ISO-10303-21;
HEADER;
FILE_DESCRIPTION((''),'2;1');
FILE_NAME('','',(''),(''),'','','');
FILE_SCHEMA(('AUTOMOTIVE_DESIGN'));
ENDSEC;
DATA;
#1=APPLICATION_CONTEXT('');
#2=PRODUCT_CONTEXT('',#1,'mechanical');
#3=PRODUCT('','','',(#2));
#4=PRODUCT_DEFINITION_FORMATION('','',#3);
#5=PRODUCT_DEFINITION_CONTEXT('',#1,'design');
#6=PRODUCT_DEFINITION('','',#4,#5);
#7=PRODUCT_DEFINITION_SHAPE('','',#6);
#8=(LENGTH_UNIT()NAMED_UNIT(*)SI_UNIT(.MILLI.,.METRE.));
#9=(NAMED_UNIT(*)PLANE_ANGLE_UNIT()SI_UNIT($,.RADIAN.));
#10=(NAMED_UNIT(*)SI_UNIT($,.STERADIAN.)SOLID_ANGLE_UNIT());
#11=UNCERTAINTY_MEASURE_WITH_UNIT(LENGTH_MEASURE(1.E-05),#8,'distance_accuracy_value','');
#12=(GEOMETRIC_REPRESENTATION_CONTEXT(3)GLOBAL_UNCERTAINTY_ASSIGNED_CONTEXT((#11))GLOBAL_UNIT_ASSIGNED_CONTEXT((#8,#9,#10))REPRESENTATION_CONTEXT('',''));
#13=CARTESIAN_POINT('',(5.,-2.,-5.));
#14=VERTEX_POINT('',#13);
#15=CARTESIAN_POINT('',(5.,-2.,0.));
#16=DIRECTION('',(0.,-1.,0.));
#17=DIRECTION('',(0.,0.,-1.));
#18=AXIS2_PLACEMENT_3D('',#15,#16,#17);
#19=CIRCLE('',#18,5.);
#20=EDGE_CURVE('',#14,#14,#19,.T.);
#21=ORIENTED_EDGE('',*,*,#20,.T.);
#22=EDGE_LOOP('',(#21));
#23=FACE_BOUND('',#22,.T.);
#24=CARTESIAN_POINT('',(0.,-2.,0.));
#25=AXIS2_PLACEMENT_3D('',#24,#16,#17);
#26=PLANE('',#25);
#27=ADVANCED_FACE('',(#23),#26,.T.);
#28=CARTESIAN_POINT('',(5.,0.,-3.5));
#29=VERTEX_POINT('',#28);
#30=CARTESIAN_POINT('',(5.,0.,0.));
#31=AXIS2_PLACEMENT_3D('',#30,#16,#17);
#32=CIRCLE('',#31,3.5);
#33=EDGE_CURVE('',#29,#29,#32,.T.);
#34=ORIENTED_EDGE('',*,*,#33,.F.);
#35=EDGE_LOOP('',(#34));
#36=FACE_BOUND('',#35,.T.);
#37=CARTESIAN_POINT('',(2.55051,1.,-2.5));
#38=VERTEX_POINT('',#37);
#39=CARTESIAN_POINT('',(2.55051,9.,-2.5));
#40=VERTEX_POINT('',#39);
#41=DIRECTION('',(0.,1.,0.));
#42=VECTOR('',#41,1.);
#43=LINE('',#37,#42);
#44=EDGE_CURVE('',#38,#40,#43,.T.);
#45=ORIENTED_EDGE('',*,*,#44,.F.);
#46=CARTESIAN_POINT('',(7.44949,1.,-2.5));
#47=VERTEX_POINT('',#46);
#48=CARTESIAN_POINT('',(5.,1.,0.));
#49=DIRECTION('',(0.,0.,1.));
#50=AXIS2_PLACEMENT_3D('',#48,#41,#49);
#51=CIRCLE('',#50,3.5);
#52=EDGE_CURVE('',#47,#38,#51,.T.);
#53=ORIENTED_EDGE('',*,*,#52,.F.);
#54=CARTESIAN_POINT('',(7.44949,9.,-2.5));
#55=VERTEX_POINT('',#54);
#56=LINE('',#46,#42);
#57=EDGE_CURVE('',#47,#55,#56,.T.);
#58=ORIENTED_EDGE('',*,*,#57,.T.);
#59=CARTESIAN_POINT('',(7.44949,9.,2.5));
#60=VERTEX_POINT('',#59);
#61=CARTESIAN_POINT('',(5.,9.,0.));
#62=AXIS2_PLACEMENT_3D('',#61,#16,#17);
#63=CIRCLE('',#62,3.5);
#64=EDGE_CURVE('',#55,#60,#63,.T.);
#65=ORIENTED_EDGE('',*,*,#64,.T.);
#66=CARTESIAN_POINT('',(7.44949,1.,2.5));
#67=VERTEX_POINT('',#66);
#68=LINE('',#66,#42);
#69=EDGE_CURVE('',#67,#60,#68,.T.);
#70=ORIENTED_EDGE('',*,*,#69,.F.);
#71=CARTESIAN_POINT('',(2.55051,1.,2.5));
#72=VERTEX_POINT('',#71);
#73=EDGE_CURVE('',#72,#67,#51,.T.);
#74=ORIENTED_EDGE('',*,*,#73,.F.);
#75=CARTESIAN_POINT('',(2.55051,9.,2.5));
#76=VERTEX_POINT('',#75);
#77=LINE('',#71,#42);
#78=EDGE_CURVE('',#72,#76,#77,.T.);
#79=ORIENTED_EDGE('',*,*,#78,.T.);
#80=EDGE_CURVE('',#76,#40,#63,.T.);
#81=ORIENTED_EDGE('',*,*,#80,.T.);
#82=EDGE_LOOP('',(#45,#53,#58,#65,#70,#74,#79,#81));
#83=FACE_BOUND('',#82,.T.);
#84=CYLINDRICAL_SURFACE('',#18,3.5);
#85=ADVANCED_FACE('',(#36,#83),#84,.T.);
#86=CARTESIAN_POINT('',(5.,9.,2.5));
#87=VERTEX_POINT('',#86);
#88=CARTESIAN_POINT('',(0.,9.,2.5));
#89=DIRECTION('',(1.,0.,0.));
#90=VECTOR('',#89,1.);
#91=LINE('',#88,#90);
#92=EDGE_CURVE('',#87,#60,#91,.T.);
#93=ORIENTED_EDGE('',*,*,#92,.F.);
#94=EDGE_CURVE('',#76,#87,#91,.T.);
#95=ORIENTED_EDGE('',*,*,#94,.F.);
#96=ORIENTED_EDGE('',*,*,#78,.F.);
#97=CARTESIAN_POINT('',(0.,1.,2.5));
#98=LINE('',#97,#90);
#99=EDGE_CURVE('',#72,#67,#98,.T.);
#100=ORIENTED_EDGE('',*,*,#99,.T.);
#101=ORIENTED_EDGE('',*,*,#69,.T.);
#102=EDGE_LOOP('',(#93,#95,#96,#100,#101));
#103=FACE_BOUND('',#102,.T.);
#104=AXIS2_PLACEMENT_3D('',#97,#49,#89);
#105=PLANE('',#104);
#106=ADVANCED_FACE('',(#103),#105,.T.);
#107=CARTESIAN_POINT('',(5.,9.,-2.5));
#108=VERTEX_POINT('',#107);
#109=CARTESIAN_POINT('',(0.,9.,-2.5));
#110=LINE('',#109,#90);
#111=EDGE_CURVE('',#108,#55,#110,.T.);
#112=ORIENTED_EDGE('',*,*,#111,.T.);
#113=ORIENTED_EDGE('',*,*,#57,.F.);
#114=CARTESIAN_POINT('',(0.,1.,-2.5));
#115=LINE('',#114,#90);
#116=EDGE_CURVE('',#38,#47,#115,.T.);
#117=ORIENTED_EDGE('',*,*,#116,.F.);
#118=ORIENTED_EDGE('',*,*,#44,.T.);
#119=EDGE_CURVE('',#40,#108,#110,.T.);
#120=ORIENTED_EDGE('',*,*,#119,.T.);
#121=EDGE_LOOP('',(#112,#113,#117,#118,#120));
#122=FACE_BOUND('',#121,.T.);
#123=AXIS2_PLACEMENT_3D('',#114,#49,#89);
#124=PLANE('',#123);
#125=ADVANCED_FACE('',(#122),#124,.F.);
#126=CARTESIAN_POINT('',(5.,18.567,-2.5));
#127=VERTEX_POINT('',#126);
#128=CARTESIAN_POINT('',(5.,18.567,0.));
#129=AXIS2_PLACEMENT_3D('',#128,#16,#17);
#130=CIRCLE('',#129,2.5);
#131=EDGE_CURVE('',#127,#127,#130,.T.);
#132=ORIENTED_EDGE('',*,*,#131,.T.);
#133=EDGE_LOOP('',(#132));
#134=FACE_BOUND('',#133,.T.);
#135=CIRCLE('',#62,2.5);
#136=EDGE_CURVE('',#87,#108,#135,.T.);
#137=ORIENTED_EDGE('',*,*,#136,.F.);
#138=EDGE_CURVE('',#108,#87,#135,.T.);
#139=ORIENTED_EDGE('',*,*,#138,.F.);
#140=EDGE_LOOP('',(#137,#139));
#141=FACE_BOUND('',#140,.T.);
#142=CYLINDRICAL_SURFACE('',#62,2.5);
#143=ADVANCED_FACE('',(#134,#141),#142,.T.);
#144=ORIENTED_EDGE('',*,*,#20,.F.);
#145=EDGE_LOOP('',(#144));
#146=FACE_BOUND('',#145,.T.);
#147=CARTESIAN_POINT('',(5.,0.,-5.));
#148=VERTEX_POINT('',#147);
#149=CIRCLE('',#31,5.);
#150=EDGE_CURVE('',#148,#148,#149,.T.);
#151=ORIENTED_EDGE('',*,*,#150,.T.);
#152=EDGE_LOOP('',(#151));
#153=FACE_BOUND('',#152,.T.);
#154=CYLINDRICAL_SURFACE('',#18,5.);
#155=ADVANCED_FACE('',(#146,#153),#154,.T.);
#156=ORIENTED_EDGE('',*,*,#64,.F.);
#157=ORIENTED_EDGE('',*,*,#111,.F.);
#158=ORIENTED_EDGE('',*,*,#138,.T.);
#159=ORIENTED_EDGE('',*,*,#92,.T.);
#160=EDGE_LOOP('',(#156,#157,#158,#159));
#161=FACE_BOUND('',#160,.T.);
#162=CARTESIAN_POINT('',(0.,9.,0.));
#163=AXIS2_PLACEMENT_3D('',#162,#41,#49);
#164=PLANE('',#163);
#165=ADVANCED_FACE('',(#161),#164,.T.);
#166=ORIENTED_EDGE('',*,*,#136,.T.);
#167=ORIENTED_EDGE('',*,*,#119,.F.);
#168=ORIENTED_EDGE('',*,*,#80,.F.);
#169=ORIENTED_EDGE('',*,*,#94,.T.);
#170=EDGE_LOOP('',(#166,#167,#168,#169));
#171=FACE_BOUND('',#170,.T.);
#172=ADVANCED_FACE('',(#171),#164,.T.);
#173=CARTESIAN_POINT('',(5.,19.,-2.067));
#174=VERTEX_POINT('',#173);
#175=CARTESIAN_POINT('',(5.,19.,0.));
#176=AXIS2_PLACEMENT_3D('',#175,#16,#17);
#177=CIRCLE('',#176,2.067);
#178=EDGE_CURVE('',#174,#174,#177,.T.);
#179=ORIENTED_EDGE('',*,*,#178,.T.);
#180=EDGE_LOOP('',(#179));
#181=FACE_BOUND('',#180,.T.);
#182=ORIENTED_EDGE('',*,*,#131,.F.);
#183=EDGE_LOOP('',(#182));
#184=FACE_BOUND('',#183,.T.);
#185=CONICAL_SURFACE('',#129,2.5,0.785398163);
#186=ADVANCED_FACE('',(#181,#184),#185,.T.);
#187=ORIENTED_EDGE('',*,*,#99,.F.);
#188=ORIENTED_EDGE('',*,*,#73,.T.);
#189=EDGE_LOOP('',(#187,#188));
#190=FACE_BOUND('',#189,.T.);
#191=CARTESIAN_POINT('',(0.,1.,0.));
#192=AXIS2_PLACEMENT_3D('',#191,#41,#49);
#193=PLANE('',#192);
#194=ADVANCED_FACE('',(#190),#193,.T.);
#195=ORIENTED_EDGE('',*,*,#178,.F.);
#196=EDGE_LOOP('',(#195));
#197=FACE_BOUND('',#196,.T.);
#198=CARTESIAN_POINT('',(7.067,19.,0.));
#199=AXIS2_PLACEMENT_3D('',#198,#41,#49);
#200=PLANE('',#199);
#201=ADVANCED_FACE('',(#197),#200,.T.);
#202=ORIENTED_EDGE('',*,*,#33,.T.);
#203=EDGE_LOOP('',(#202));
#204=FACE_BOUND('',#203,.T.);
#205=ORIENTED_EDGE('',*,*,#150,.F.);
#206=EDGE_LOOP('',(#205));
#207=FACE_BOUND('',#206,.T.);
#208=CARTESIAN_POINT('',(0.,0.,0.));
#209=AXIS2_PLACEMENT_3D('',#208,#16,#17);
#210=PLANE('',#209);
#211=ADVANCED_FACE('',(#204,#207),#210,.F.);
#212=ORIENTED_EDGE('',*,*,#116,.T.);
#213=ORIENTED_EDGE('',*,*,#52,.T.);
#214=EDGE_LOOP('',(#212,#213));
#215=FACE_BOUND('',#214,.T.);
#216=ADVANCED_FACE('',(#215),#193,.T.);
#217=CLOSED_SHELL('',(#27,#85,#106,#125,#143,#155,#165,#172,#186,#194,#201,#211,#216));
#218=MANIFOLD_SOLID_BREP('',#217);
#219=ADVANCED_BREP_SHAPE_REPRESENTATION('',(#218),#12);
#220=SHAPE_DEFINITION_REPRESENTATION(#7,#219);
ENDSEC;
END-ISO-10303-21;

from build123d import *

# Parameters (mm, degrees)
CUT_EXTRUDE_1_DEPTH = 8
EXTRUDE_START       = 7
SKETCH_3_R          = 2.5
EXTRUDE_1_DEPTH     = 7


# Read off the part's stored shape, not the designer's step: M5 机械螺纹 螺柱1
with BuildPart() as part:
    # Sketch 1 → 旋转1 (revolve)
    with BuildSketch(Plane.XY, mode=Mode.PRIVATE) as revolve_1_sk:
        Polygon((5, 9), (5, -2), (10, -2), (10, 0), (8.5, 0), (8.5, 9), align=None)
    revolve(revolve_1_sk.sketch.rotate(Axis((5, -2, 0), (0, 1, 0)), 90), axis=Axis((5, -2, 0), (0, 1, 0)))

    # Sketch 2 → 切除-拉伸1 (cut)
    with BuildSketch(Plane(origin=(0, 9, 0), x_dir=(1, 0, 0), z_dir=(0, 1, 0))):
        with BuildLine():
            ThreePointArc((7.449489743, 2.5), (5, 3.5), (2.550510257, 2.5))
            Line((2.550510257, 2.5), (7.449489743, 2.5))
        make_face()
        with BuildLine():
            Line((7.449489743, -2.5), (2.550510257, -2.5))
            ThreePointArc((2.550510257, -2.5), (5, -3.5), (7.449489743, -2.5))
        make_face()
    extrude(amount=-CUT_EXTRUDE_1_DEPTH, mode=Mode.SUBTRACT)

    # M5 机械螺纹 螺柱1 outline → M5 机械螺纹 螺柱1 (revolve)
    with BuildSketch(Plane(origin=(5, 0, 0), x_dir=(1, 0, 0), z_dir=(0, 0, 1))):
        Polygon((2.067, 19), (0, 19), (0, 9), (2.5, 9), (2.5, 18.567), align=None)
    revolve(axis=Axis((5, 0, 0), (0, 1, 0)))

    # 草图3 → 凸台-拉伸1 (add)
    with BuildSketch(Plane(origin=(0, 9, 0), x_dir=(1, 0, 0), z_dir=(0, 1, 0)).offset(EXTRUDE_START)):
        with Locations(Location((5, 0, 0), (0, 0, 90))):
            Circle(SKETCH_3_R)
    extrude(amount=-EXTRUDE_1_DEPTH)


solid = part.part
